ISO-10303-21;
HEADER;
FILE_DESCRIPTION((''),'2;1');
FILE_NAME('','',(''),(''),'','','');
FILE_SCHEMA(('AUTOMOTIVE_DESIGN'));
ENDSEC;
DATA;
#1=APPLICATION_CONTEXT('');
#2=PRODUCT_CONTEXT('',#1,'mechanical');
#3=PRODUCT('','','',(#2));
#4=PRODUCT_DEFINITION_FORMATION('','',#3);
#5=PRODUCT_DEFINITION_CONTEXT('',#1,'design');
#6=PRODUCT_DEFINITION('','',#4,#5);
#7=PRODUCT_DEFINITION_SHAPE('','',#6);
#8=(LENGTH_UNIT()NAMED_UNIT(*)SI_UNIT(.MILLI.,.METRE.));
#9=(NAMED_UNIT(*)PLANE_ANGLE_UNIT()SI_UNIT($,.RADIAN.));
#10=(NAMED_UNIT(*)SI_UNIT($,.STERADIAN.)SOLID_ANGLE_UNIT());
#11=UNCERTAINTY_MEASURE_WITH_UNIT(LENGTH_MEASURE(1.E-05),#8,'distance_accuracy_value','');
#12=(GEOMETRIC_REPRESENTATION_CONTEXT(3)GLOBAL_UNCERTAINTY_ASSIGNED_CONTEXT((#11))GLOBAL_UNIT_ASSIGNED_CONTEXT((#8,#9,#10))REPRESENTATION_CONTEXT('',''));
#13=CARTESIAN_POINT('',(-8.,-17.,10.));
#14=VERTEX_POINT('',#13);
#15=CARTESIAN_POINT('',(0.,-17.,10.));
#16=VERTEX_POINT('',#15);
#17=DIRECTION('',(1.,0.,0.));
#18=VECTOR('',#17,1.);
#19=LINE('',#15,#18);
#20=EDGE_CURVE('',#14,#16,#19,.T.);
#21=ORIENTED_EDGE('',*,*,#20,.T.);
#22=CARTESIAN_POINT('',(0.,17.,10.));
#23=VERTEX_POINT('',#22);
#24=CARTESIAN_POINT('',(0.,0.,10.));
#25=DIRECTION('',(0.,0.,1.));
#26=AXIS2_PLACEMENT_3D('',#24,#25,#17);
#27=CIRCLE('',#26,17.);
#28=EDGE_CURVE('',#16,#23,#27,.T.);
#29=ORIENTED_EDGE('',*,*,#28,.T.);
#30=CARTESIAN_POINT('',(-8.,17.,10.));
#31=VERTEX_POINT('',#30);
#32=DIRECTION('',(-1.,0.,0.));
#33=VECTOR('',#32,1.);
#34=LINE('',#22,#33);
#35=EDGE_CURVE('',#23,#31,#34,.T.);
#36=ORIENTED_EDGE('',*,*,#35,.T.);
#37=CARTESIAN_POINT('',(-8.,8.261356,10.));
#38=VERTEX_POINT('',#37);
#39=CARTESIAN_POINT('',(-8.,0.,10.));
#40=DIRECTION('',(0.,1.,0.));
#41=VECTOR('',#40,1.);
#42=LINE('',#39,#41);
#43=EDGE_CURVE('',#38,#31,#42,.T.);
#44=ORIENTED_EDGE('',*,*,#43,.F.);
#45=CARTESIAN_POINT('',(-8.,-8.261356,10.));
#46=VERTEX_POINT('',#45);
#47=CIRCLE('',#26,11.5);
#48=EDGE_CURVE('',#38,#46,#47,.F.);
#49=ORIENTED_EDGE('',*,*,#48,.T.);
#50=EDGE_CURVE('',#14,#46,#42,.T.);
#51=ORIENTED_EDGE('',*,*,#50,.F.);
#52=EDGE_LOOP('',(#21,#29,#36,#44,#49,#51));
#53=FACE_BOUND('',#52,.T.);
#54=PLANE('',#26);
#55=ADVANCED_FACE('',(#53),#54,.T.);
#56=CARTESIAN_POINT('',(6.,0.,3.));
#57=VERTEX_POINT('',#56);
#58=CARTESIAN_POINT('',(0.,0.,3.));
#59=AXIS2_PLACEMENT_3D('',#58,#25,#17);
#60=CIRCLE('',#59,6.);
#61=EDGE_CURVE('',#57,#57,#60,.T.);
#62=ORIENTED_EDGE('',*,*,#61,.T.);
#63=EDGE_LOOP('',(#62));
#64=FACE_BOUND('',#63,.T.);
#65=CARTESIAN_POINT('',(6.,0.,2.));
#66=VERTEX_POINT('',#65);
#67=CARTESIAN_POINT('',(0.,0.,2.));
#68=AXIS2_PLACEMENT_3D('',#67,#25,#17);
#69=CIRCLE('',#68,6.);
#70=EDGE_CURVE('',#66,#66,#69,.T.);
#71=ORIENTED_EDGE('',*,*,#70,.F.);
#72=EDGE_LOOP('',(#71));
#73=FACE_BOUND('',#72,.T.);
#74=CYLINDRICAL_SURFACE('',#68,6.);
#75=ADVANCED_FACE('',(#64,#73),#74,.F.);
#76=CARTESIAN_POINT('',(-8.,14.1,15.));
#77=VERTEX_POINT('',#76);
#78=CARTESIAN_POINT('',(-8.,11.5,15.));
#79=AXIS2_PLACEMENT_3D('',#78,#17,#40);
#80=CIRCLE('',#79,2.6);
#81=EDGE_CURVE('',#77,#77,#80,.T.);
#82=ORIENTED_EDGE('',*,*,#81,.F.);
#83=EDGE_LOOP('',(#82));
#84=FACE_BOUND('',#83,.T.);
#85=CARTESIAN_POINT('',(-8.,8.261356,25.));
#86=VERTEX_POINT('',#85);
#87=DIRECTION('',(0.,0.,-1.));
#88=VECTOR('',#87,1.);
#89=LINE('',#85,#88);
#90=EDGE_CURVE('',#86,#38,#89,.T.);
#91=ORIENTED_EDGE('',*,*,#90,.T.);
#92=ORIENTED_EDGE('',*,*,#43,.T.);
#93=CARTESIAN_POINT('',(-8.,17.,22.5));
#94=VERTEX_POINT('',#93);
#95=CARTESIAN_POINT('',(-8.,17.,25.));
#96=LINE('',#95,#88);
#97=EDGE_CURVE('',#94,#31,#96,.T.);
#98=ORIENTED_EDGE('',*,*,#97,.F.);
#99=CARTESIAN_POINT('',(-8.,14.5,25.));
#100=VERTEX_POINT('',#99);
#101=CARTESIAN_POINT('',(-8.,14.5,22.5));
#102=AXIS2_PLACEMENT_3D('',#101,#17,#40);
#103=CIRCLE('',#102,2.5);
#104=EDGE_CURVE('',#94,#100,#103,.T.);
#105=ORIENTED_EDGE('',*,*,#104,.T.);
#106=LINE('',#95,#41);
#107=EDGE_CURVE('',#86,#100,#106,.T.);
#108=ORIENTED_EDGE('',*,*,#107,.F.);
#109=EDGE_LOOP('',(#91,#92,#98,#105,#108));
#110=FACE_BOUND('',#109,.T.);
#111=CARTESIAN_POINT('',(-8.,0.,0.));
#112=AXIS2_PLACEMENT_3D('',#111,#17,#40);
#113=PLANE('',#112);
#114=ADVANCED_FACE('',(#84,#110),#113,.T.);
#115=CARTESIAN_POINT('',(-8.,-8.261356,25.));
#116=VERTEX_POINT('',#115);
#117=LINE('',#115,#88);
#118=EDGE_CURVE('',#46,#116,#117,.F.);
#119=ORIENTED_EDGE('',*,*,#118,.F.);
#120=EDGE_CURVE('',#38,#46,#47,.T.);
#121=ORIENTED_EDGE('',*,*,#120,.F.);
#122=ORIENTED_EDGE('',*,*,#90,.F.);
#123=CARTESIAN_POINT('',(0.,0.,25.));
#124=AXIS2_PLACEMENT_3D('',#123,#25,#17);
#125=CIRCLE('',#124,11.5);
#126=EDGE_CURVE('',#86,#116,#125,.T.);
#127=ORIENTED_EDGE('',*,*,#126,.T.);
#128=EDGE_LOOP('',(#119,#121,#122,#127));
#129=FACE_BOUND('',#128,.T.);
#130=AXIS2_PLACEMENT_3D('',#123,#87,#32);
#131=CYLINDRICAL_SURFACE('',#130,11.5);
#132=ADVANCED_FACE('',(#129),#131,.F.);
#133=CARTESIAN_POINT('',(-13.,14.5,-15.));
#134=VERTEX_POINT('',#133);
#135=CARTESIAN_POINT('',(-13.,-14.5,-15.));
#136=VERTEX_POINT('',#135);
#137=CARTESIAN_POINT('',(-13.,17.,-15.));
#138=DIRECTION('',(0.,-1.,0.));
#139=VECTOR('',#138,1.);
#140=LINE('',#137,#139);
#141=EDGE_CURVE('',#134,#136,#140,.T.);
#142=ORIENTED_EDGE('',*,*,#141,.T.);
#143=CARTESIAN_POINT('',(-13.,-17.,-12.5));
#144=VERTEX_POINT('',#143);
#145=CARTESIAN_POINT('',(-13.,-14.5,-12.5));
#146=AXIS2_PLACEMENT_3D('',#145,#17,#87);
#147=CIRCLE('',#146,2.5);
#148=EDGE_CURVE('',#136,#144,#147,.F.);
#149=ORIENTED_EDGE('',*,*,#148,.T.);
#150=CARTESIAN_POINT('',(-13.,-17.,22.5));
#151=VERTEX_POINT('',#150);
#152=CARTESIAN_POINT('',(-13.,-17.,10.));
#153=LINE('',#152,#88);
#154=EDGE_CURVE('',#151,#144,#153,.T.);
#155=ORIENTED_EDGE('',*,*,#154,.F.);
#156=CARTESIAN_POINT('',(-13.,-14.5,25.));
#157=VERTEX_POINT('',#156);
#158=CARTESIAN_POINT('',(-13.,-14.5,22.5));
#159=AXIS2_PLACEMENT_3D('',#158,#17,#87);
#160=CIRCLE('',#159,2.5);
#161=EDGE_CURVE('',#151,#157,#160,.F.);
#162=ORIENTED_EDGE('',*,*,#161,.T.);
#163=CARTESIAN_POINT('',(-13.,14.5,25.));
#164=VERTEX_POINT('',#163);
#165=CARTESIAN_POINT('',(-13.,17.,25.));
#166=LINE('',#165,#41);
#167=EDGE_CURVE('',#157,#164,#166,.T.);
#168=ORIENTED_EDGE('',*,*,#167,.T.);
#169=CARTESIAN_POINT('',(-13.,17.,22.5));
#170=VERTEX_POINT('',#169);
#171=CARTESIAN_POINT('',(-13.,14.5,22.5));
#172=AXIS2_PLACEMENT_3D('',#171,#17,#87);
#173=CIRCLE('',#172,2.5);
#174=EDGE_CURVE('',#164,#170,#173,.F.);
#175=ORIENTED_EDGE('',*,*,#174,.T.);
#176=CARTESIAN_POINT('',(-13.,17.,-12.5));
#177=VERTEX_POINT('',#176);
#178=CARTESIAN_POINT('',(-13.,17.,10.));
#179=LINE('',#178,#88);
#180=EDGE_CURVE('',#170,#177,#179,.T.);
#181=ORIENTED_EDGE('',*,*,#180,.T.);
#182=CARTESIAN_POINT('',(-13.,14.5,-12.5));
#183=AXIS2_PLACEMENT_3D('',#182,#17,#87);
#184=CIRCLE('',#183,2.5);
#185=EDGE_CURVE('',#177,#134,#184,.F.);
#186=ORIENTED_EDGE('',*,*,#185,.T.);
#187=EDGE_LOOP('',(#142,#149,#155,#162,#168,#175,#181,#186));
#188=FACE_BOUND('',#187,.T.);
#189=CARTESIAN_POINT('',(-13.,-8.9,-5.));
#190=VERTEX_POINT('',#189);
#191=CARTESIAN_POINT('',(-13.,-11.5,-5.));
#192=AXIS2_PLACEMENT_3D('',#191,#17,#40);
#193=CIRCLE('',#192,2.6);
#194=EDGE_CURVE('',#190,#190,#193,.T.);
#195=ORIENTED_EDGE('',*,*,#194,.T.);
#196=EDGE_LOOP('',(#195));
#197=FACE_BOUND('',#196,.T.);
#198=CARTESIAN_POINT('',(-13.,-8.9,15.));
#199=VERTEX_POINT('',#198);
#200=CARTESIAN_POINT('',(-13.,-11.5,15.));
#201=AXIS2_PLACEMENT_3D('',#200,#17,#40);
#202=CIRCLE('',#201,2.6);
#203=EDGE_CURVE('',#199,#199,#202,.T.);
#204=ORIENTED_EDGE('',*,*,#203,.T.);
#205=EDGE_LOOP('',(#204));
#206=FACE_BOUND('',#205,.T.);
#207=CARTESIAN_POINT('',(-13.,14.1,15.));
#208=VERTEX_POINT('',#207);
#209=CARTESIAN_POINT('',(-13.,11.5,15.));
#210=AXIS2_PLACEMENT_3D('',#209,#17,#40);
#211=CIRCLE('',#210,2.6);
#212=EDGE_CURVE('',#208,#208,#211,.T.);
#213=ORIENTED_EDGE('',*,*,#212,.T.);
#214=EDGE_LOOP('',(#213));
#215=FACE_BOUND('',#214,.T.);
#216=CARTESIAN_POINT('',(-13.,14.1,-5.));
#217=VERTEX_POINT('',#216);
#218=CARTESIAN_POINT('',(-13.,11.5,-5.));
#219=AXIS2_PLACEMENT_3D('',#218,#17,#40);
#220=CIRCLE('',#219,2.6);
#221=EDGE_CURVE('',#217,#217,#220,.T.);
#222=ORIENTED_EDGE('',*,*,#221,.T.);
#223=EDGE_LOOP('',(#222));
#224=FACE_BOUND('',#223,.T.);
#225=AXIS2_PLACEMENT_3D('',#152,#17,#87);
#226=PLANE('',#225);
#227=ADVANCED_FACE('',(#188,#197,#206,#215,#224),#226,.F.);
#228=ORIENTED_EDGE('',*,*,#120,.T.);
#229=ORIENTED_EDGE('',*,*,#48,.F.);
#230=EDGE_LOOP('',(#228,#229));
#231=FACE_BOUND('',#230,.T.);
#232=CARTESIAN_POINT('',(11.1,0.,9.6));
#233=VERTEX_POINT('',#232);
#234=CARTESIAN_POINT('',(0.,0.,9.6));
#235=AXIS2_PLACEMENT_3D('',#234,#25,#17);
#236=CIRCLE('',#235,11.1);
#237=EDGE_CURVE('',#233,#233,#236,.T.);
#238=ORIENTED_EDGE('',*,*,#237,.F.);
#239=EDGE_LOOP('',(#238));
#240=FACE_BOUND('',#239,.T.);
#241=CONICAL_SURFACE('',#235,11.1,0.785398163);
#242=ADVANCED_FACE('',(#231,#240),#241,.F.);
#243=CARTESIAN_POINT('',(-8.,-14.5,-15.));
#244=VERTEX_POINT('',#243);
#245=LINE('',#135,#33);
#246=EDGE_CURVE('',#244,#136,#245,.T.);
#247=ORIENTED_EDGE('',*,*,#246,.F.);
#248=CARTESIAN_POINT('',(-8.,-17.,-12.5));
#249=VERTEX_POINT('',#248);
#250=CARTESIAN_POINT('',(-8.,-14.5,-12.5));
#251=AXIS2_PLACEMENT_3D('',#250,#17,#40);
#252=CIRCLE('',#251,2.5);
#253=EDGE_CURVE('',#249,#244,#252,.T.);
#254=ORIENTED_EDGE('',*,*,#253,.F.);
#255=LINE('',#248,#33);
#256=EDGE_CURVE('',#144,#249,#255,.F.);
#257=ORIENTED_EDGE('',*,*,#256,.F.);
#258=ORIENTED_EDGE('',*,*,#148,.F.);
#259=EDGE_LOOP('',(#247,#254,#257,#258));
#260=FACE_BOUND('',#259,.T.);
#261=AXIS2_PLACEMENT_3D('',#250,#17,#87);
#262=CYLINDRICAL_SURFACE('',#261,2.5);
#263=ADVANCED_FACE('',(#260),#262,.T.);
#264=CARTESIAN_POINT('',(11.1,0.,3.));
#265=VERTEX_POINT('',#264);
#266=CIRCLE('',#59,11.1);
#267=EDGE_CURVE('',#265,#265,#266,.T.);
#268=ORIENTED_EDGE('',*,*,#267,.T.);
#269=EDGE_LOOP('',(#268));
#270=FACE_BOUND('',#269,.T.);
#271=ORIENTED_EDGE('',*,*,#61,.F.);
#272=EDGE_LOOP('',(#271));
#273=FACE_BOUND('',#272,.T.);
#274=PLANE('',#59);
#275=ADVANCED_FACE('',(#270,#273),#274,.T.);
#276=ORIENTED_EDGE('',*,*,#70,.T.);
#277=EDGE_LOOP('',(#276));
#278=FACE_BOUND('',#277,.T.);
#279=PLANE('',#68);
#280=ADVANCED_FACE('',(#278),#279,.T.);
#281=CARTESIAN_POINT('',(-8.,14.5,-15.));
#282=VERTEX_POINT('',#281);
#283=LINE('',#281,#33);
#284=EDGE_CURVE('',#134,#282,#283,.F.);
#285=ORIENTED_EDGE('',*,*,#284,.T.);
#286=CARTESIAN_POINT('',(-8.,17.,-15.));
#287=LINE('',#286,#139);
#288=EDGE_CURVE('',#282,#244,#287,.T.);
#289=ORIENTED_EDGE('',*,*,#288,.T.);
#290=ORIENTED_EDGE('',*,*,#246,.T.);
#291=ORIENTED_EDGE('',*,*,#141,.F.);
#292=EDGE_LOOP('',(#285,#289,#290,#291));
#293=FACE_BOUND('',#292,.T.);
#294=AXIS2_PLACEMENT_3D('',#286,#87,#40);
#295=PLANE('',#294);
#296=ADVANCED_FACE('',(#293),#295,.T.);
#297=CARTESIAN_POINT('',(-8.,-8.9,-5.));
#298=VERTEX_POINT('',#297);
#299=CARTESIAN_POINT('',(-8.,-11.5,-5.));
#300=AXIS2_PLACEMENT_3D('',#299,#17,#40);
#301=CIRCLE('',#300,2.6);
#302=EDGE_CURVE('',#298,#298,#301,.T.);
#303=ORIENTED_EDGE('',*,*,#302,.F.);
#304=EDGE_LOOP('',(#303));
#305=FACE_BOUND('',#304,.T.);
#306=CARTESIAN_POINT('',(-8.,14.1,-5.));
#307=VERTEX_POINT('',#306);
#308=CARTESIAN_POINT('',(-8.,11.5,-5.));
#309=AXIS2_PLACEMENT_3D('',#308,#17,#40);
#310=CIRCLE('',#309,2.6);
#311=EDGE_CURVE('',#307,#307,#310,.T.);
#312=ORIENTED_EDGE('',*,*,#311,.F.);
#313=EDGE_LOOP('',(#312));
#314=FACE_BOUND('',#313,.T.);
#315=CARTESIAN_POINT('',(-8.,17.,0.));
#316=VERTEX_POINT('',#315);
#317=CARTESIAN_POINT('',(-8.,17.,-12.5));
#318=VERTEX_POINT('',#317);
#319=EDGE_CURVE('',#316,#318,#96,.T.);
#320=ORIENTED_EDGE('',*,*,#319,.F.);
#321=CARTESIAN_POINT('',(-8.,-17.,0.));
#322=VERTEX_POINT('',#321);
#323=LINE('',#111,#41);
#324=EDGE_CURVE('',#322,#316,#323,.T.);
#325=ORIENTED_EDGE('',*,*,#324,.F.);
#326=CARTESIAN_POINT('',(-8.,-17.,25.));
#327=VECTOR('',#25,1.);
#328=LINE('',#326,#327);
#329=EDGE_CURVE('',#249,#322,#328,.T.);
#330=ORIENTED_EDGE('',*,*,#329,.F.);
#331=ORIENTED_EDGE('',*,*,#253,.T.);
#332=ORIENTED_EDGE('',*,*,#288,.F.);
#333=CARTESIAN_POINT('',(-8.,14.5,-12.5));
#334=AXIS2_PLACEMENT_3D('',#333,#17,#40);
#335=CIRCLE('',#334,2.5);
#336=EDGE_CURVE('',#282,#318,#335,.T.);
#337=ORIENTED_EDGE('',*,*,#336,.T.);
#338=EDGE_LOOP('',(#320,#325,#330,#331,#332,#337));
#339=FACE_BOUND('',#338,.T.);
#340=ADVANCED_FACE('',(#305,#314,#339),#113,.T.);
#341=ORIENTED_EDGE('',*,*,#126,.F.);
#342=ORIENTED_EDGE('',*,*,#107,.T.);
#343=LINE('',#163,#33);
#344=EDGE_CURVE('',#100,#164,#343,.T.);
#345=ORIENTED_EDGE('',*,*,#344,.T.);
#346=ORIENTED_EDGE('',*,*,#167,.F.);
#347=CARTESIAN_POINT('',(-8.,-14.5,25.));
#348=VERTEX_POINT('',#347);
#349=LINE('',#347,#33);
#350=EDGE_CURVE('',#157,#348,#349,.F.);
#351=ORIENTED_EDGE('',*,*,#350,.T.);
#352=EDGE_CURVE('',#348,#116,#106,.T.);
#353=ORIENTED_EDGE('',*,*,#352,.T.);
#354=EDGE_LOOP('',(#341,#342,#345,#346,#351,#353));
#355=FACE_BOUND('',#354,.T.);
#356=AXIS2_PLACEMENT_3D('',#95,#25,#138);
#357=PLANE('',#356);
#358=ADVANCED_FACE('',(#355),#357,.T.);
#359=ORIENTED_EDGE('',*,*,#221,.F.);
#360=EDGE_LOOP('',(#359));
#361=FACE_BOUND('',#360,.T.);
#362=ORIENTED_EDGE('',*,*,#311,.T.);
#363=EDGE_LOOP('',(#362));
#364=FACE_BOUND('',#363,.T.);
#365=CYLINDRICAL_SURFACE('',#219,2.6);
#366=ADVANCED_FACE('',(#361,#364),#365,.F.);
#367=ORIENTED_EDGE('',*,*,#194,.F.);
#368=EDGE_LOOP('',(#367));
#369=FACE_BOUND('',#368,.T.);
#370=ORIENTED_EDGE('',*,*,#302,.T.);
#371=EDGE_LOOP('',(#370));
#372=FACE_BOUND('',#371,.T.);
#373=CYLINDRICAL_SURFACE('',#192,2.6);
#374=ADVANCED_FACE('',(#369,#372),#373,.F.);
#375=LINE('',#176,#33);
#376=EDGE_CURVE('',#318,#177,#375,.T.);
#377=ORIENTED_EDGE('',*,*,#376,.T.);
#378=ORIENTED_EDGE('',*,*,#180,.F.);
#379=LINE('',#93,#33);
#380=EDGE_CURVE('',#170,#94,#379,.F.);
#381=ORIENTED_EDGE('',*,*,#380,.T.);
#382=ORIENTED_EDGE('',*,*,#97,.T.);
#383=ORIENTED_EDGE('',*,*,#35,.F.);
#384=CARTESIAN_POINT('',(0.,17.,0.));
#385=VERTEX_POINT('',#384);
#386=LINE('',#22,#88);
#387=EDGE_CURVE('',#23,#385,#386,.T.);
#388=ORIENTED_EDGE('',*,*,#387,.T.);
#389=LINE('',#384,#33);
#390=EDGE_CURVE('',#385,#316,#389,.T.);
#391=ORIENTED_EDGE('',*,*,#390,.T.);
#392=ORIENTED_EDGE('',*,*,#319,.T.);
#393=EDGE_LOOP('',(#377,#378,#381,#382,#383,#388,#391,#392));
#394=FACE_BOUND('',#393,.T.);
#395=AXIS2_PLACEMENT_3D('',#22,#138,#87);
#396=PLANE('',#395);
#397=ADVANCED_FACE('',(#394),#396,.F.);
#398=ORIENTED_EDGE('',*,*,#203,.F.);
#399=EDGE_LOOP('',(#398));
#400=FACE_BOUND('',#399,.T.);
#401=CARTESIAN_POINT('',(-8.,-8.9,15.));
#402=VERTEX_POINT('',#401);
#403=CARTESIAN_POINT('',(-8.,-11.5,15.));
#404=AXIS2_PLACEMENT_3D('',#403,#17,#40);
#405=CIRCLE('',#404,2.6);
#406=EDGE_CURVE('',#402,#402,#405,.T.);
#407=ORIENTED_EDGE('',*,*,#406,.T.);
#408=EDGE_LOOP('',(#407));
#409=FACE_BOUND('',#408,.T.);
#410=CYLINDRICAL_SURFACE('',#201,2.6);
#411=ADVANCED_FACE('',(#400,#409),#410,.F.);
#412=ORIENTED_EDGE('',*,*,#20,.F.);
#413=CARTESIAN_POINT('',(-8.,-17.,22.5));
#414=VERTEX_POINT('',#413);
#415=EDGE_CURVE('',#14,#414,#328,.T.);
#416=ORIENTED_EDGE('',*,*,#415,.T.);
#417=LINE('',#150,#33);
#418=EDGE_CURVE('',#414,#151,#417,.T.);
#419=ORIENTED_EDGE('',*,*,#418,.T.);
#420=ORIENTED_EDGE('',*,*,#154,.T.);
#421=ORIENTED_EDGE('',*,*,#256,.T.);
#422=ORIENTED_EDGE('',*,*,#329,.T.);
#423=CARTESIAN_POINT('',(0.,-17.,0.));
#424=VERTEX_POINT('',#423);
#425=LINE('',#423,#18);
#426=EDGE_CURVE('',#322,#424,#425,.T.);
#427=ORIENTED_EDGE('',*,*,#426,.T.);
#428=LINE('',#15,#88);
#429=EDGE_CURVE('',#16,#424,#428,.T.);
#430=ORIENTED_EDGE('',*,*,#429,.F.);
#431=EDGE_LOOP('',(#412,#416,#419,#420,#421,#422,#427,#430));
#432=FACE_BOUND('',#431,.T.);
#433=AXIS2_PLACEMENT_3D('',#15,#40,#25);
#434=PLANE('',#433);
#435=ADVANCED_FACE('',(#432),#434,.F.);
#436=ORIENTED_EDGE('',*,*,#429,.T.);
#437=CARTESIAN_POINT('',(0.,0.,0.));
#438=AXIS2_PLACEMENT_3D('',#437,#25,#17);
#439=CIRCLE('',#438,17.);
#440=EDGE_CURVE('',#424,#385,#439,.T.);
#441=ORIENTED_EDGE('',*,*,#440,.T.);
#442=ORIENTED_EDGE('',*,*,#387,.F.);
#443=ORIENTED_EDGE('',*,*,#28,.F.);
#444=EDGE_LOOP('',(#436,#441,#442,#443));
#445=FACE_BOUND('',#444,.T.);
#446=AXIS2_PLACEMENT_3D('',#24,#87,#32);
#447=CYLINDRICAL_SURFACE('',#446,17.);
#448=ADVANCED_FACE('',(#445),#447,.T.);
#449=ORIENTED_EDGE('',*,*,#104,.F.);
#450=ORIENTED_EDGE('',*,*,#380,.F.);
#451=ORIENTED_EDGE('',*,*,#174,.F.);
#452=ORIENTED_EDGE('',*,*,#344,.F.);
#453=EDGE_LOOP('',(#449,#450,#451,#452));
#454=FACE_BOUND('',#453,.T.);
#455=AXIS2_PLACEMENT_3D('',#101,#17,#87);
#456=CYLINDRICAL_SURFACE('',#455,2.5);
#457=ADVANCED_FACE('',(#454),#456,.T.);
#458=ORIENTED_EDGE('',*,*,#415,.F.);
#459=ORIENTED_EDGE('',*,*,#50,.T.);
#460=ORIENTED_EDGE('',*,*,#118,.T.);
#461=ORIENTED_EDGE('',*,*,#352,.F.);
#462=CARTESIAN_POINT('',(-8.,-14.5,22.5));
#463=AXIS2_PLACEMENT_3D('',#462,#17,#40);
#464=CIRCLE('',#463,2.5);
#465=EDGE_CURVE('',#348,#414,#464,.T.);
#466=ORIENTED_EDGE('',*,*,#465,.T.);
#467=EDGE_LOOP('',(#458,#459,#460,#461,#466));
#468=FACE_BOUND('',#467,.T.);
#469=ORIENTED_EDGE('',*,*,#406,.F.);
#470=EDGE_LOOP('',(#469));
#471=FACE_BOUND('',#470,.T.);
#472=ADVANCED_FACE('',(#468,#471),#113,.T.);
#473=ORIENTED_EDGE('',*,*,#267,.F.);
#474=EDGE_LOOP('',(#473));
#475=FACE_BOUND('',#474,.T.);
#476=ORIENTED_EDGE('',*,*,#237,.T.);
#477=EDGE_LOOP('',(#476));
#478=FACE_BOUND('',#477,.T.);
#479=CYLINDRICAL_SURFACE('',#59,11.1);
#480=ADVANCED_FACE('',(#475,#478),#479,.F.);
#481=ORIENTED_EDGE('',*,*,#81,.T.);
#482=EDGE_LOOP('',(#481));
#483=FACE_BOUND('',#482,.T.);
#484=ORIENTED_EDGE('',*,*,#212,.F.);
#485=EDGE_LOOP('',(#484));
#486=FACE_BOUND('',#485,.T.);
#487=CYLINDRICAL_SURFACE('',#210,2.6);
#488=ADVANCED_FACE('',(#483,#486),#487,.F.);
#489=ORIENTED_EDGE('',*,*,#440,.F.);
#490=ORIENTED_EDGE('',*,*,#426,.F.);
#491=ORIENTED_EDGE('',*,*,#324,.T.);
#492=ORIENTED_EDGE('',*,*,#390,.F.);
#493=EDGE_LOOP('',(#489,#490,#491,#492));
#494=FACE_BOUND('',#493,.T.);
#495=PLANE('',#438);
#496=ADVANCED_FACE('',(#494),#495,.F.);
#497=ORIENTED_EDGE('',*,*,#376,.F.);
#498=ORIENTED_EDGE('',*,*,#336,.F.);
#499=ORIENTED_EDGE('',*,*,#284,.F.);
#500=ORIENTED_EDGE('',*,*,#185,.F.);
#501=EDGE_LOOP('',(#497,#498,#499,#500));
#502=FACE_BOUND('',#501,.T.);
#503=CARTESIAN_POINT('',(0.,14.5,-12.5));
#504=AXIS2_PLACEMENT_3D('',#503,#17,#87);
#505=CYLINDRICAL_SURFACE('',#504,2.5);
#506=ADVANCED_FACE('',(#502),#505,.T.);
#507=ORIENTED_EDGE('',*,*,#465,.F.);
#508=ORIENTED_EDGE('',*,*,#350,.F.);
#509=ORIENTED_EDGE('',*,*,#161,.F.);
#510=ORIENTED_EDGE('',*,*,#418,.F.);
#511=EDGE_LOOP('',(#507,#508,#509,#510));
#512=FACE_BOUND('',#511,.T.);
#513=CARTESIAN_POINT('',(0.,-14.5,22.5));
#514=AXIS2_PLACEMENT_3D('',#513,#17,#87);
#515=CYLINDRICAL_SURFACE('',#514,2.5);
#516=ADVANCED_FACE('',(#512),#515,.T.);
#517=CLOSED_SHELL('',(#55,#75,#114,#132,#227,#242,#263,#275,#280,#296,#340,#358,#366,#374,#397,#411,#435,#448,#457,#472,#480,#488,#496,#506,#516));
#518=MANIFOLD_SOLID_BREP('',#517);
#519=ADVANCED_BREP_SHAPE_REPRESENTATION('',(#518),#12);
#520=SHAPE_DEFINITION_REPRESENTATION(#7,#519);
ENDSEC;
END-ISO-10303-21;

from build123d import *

# Parameters (mm, degrees)
EXTRUDE_1_DEPTH      = 10
SKETCH_10_W          = 40
SKETCH_10_H          = 34
EXTRUDE_3_DEPTH      = 5
SKETCH_11_R          = 2.6
CUT_EXTRUDE_7_DEPTH  = 40.230090492
SKETCH_2_R           = 11.1
CUT_EXTRUDE_1_DEPTH  = 7
SKETCH_3_R           = 6
CUT_EXTRUDE_2_DEPTH  = 1
SKETCH_14_R          = 11.5
CUT_EXTRUDE_10_DEPTH = 35.684290392
CHAMFER_1_SIZE       = 0.4
FILLET_1_R           = 2.5


with BuildPart() as part:
    # Эскиз1 → Бобышка-Вытянуть1 (new body)
    with BuildSketch(Plane.XY):
        with BuildLine():
            Line((0, 17), (-13, 17))
            Line((-13, 17), (-13, -17))
            Line((-13, -17), (0, -17))
            ThreePointArc((0, -17), (17, 0), (0, 17))
        make_face()
    extrude(amount=EXTRUDE_1_DEPTH)

    # Эскиз10 → Бобышка-Вытянуть3 (add)
    with BuildSketch(Plane.ZY.offset(13)):
        with Locations((5, 0)):
            Rectangle(SKETCH_10_W, SKETCH_10_H)
    extrude(amount=-EXTRUDE_3_DEPTH)

    # Эскиз11 → Вырез-Вытянуть7 (cut, through all)
    with BuildSketch(Plane(origin=(-8, 0, 0), x_dir=(0, 0, -1), z_dir=(1, 0, 0))):
        with Locations(Location((5, -11.5, 0), (0, 0, 90))):
            Circle(SKETCH_11_R)
        with Locations(Location((5, 11.5, 0), (0, 0, 90))):
            Circle(SKETCH_11_R)
        with Locations(Location((-15, 11.5, 0), (0, 0, 90))):
            Circle(SKETCH_11_R)
        with Locations(Location((-15, -11.5, 0), (0, 0, 90))):
            Circle(SKETCH_11_R)
    extrude(amount=-CUT_EXTRUDE_7_DEPTH, mode=Mode.SUBTRACT)

    # Эскиз2 → Вырез-Вытянуть1 (cut)
    with BuildSketch(Plane.XY.offset(10)):
        Circle(SKETCH_2_R)
    extrude(amount=-CUT_EXTRUDE_1_DEPTH, mode=Mode.SUBTRACT)

    # Эскиз3 → Вырез-Вытянуть2 (cut)
    with BuildSketch(Plane.XY.offset(3)):
        Circle(SKETCH_3_R)
    extrude(amount=-CUT_EXTRUDE_2_DEPTH, mode=Mode.SUBTRACT)

    # Эскиз14 → Вырез-Вытянуть10 (cut, through all)
    with BuildSketch(Plane.XY.offset(10)):
        Circle(SKETCH_14_R)
    extrude(amount=CUT_EXTRUDE_10_DEPTH, mode=Mode.SUBTRACT)

    # Фаска1
    chamfer_1_edges = [part.edges().sort_by_distance(p)[0] for p in [
        (-11.1, 0, 10),
    ]]
    chamfer(chamfer_1_edges, length=CHAMFER_1_SIZE - 0.0001)  # a hair under: the kernel refuses the full size

    # Скругление1
    fillet_1_edges = [part.edges().sort_by_distance(p)[0] for p in [
        (-10.5, 17, -15),
        (-10.5, 17, 25),
        (-10.5, -17, 25),
        (-10.5, -17, -15),
    ]]
    fillet(fillet_1_edges, radius=FILLET_1_R)


solid = part.part
